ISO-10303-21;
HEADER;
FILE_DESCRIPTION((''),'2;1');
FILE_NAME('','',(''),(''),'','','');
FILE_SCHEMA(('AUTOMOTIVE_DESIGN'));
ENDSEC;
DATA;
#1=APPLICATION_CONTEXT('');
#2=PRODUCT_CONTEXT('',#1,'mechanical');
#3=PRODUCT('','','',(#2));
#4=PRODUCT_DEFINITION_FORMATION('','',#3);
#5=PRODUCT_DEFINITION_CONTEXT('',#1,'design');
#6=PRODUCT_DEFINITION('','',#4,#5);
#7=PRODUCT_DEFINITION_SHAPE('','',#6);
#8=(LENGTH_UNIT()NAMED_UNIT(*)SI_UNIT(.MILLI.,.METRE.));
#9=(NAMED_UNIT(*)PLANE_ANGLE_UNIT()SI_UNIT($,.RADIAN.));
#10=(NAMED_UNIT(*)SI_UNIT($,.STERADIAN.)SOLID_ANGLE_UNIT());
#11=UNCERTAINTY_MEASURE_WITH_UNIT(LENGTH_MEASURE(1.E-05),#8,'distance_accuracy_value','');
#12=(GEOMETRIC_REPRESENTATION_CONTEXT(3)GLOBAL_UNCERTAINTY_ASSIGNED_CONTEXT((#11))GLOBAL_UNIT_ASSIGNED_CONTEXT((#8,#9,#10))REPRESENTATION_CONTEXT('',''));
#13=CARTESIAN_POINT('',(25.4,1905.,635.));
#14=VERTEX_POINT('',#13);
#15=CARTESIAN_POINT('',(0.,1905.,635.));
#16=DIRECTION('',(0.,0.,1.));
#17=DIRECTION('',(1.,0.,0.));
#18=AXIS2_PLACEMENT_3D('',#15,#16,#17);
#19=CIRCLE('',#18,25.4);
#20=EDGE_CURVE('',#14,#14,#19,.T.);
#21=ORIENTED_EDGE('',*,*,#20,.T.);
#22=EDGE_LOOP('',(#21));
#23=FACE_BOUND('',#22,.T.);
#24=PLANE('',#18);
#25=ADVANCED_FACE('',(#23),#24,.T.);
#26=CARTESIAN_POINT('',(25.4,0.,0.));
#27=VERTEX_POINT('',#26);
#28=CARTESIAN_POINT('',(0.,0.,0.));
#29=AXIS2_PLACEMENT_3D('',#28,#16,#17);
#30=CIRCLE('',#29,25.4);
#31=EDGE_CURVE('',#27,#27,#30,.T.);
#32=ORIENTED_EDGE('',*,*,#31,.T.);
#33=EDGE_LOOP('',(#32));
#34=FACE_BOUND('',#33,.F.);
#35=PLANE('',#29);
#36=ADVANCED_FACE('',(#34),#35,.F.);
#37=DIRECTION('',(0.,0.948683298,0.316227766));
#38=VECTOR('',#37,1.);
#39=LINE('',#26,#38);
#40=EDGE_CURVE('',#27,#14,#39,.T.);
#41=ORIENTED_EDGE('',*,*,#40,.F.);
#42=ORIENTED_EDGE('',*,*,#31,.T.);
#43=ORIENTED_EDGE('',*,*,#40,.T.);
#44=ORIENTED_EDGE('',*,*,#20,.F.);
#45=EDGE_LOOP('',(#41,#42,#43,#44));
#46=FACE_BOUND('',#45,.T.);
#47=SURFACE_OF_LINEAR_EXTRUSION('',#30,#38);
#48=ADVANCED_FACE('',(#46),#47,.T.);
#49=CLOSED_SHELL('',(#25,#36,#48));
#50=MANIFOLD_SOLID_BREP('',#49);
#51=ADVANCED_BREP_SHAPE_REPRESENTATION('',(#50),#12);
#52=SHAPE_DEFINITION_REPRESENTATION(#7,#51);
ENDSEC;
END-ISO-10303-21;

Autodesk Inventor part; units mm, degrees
ref_plane "YZ Plane" through (0, 0, 0) normal (1, 0, 0) x (0, 1, 0)
ref_plane "XZ Plane" through (0, 0, 0) normal (0, 1, 0) x (-1, 0, 0)
ref_plane "XY Plane" through (0, 0, 0) normal (0, 0, 1) x (1, 0, 0)
sketch "Sketch1" plane through (0, 0, 0) normal (0, 0, 1) x (1, 0, 0)
  circle A0 centre (0, 0) radius 25.4
  dimension "d2" = 50.8
sketch3d "3D Sketch1"
  line L0 (0, -11.2544, 25.1163) -> (0, 1893.7456, 660.1163)
  dimension "d6" = 1905
  dimension "d7" = 90
  dimension "d8" = 635
sweep "Sweep1" add profiles "Sketch1" path "3D Sketch1"
properties part number "Out pipe"
